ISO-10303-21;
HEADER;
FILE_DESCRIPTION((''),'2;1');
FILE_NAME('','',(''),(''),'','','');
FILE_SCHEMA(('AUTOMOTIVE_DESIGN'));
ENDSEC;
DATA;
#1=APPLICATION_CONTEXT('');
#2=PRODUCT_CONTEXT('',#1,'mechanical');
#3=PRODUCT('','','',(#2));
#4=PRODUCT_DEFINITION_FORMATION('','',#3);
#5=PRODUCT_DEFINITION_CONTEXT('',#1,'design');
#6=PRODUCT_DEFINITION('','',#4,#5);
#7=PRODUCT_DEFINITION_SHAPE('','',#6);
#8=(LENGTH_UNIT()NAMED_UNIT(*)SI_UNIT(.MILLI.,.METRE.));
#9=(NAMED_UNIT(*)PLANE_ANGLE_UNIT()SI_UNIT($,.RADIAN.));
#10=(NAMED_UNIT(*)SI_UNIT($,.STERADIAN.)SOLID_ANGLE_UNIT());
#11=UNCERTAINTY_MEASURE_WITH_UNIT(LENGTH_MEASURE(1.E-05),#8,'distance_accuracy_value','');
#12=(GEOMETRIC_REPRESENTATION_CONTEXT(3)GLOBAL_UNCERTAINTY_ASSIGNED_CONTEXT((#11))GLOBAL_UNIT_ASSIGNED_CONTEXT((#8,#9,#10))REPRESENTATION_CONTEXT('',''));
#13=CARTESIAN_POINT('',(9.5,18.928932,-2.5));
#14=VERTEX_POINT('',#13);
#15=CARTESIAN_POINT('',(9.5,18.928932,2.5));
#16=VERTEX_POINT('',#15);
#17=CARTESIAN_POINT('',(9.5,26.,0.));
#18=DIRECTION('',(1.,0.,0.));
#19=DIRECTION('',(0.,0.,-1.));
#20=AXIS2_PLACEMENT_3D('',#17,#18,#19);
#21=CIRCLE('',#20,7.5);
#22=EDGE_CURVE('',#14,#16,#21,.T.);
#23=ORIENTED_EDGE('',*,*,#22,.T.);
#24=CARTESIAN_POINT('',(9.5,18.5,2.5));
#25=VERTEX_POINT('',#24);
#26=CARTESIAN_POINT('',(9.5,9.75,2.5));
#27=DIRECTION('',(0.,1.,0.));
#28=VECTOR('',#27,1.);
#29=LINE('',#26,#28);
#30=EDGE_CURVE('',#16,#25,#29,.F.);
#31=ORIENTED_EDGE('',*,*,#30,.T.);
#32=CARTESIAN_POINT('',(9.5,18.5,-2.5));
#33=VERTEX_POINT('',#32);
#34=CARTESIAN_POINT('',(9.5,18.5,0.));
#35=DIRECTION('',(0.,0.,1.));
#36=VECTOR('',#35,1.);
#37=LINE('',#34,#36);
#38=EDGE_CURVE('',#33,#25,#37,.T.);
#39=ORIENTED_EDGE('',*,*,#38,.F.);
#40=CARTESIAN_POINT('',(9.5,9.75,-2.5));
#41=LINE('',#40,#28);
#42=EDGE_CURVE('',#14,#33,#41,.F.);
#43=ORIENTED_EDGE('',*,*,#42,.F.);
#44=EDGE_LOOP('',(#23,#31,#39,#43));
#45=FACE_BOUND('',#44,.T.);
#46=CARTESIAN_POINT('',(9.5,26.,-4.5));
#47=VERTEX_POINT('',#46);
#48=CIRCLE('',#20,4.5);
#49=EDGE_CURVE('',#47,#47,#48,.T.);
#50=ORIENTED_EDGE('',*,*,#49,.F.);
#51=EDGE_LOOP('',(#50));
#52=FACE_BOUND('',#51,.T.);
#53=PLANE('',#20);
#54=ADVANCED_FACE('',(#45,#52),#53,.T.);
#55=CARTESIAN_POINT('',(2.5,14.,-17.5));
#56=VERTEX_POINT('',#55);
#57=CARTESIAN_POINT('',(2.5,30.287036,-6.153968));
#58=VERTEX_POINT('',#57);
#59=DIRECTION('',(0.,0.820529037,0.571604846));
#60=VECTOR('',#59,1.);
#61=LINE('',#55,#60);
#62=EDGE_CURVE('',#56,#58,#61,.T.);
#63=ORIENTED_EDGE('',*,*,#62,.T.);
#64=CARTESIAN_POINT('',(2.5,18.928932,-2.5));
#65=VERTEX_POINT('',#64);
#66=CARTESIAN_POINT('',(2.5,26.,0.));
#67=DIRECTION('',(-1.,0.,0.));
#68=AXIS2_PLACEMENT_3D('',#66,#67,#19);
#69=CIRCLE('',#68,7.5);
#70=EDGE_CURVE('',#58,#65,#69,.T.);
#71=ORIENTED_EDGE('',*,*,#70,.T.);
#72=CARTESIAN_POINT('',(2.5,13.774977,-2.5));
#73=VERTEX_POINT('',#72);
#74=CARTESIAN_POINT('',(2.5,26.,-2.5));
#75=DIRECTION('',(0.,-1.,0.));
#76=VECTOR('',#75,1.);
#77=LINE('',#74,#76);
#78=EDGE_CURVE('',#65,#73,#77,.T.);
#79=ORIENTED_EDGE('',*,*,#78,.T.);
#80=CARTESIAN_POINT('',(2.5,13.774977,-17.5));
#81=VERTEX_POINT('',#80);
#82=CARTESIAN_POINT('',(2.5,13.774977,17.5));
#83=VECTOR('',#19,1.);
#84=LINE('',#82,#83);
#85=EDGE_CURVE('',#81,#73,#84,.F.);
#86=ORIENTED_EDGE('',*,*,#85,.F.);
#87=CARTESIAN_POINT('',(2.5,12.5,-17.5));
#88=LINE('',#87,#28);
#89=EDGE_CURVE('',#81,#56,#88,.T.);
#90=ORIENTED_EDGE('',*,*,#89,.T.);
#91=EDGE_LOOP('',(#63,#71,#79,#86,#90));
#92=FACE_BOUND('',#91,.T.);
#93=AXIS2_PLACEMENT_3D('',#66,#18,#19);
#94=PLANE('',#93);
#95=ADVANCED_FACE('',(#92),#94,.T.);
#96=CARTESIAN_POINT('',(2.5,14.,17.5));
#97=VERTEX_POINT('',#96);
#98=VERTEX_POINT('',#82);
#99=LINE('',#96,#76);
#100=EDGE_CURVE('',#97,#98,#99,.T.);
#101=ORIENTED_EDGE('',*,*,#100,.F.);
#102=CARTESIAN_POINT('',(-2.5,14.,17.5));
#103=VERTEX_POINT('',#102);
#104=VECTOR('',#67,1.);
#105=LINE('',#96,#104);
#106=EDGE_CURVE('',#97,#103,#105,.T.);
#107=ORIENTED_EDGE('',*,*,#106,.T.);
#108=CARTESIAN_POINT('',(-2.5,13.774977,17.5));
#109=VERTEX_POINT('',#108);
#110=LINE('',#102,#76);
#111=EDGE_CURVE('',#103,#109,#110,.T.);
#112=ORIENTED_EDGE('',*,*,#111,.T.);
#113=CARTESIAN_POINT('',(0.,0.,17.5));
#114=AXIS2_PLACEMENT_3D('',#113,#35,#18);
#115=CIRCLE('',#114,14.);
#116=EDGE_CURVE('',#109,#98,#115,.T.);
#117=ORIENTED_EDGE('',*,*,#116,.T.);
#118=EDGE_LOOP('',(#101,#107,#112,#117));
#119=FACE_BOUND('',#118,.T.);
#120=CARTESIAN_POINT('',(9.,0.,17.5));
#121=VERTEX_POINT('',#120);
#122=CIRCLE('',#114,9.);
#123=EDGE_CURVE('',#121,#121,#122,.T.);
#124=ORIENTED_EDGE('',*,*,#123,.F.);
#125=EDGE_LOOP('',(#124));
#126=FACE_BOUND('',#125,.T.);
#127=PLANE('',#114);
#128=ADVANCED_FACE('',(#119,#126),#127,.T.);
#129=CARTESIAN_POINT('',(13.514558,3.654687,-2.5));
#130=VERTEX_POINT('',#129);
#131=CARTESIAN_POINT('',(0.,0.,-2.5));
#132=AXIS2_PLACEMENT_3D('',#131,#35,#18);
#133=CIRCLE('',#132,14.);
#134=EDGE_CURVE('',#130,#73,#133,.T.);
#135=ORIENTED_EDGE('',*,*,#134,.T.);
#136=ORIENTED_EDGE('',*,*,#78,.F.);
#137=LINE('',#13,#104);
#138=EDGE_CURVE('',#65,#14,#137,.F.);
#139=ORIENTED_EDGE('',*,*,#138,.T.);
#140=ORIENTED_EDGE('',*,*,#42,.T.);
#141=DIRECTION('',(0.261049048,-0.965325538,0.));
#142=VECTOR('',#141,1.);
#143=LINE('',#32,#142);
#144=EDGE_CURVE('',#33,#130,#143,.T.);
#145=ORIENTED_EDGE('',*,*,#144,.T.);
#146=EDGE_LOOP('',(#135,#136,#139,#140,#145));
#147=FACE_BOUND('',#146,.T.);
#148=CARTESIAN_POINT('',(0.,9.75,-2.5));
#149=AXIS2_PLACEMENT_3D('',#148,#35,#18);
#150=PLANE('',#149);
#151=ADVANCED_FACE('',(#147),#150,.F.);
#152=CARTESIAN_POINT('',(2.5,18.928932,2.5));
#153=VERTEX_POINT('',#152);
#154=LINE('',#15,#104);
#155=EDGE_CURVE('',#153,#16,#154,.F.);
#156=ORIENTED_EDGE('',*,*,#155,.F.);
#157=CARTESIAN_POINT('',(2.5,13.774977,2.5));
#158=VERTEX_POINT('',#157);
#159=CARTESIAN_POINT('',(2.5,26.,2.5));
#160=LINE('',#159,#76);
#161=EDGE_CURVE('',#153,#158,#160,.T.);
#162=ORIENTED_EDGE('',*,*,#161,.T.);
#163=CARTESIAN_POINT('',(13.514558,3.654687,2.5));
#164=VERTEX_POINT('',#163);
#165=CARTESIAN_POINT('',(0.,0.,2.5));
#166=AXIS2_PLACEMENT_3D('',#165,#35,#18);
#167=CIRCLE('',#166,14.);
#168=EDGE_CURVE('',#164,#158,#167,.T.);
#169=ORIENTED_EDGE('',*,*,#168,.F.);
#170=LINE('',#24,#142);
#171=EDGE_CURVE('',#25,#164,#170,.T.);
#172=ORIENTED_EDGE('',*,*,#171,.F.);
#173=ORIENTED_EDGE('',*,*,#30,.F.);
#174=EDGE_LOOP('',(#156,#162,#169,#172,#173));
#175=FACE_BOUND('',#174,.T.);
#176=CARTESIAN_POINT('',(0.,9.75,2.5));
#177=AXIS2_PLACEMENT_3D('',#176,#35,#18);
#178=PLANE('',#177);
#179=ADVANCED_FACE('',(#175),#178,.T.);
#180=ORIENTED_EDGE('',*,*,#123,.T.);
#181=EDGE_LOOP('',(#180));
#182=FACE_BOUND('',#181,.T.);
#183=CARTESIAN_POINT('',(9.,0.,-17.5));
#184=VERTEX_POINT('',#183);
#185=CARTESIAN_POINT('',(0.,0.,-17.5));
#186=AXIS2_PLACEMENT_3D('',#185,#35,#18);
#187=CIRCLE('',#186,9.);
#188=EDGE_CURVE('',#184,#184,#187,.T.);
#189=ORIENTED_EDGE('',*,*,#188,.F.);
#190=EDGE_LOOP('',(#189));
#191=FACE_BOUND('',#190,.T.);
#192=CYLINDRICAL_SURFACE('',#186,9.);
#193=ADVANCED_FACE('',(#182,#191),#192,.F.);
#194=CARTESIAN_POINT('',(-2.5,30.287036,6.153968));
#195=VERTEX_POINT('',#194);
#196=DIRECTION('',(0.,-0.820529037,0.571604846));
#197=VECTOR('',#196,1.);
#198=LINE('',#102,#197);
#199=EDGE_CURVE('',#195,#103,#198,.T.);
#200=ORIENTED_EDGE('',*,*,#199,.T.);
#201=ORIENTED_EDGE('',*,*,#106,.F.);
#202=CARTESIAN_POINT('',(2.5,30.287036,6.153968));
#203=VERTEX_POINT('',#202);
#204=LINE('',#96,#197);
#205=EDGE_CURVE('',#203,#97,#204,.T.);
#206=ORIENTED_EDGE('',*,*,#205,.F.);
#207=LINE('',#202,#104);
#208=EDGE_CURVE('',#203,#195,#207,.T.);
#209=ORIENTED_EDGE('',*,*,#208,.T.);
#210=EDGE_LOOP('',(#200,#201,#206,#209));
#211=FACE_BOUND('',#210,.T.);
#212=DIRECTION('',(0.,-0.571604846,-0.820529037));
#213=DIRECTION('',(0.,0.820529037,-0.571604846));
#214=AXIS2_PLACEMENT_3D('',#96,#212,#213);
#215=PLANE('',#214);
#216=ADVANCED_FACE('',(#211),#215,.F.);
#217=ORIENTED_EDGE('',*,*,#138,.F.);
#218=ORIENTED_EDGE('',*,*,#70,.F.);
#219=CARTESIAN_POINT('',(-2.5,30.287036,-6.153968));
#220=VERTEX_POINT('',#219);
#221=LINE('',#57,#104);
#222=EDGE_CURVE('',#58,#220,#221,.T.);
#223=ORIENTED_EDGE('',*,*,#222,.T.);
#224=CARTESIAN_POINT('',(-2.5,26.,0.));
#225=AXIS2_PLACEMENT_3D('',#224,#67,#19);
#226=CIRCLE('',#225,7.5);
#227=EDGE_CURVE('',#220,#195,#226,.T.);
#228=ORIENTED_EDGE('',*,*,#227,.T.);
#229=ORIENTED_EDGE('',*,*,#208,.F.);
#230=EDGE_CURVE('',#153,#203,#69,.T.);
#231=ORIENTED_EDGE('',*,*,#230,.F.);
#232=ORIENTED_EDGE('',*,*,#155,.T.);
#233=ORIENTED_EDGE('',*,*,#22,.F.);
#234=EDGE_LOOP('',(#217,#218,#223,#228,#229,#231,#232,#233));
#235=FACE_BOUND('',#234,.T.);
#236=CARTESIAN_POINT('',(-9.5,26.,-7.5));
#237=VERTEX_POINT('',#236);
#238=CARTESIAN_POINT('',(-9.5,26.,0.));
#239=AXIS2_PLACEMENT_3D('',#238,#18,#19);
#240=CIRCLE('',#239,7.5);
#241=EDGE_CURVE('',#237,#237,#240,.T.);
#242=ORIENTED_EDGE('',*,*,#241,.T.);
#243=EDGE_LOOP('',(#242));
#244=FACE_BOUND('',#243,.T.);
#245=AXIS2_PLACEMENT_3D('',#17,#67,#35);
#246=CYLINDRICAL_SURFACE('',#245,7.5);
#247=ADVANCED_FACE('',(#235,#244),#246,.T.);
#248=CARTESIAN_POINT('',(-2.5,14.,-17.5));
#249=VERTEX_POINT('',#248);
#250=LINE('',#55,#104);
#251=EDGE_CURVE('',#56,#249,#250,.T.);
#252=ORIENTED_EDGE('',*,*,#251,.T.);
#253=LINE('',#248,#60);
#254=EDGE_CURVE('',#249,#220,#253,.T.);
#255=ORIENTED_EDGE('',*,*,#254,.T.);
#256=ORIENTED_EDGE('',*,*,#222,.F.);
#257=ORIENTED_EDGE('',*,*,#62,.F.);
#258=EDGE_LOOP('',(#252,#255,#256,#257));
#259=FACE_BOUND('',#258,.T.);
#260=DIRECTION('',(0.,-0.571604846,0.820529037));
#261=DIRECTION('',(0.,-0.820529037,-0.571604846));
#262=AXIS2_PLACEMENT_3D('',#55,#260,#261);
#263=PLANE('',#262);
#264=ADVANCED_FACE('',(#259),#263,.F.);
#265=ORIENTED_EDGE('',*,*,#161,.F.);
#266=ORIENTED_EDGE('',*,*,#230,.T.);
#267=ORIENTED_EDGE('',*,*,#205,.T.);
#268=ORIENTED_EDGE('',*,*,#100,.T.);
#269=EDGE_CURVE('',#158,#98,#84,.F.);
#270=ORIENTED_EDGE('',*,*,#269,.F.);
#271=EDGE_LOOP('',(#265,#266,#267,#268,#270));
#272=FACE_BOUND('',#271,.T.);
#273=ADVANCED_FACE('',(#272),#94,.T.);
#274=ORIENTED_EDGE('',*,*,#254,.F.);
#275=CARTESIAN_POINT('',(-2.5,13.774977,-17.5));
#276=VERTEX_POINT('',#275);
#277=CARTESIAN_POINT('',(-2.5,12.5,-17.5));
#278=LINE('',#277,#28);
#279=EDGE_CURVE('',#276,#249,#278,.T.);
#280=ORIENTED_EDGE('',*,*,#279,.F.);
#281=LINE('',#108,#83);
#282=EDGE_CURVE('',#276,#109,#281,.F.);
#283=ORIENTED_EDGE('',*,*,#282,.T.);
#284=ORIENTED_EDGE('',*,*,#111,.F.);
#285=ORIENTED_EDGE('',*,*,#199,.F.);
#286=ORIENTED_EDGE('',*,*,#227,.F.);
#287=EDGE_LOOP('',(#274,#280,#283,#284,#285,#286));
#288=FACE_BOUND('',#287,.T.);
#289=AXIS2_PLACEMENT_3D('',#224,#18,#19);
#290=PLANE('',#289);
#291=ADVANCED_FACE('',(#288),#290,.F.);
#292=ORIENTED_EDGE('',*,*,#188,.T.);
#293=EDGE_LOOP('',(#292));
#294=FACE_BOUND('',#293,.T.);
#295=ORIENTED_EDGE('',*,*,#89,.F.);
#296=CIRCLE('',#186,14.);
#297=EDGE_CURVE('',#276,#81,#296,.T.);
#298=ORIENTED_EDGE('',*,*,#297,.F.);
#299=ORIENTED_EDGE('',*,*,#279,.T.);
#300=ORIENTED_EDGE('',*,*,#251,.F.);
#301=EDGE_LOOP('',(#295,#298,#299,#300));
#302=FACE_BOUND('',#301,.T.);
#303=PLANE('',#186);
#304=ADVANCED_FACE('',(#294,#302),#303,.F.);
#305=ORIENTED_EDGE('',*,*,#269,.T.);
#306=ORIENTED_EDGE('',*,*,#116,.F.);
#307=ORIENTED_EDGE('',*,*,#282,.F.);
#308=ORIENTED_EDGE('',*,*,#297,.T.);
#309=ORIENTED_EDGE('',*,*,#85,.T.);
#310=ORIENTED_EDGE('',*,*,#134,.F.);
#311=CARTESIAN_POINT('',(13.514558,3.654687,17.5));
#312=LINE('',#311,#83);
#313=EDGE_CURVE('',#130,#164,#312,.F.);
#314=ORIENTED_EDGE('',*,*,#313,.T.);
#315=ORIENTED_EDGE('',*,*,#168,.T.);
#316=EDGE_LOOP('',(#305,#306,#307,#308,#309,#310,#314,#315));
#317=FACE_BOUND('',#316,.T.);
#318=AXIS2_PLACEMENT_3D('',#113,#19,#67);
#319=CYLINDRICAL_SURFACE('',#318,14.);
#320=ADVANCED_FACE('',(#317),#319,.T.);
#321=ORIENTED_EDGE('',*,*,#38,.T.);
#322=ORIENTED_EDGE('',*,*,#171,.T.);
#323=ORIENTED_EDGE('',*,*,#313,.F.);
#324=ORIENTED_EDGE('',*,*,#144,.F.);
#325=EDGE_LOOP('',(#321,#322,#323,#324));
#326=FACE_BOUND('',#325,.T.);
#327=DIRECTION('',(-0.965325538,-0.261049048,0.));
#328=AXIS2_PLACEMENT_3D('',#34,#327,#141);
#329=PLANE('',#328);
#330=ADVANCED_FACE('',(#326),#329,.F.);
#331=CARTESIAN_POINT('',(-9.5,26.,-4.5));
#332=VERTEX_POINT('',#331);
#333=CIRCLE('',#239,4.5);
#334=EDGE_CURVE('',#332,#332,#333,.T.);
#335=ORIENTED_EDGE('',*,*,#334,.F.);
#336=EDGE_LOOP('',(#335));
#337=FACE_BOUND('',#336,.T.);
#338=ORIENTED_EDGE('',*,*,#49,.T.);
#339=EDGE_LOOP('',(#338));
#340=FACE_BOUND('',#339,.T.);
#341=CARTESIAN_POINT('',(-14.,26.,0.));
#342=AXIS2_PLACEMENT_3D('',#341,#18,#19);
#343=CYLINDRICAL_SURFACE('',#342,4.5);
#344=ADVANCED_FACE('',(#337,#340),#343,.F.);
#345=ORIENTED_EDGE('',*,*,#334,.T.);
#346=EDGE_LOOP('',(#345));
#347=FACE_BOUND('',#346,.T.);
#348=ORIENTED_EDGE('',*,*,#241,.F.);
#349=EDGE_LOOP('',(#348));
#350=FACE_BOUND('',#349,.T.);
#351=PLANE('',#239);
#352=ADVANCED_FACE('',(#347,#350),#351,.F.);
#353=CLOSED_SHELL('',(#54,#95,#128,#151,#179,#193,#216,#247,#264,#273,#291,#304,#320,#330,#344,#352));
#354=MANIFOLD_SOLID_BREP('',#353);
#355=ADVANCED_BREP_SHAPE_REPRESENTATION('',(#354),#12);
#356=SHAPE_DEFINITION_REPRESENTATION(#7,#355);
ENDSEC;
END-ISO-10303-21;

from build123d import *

# Parameters (mm, degrees)
SKETCH1_R               = 14
BOSS_EXTRUDE1_DEPTH     = 17.5
CUT_EXTRUDE1_DEPTH      = 27.424420523
CUT_EXTRUDE1_DEPTH_BACK = 27.424420523
SKETCH2_R               = 9
SKETCH3_R               = 7.5
BOSS_EXTRUDE2_DEPTH     = 9.5
CUT_EXTRUDE2_DEPTH      = 45.505617623
CUT_EXTRUDE2_DEPTH_BACK = 45.505617623
SKETCH4_R               = 4.5
BOSS_EXTRUDE3_DEPTH     = 2.5
RIB3_START              = -2.5
RIB3_DEPTH              = 5


with BuildPart() as part:
    # Sketch1 → Boss-Extrude1 (new, symmetric)
    with BuildSketch(Plane.XY):
        Circle(SKETCH1_R)
    extrude(amount=BOSS_EXTRUDE1_DEPTH, both=True)

    # Sketch2 → Cut-Extrude1 (cut, two sides: drawn at the far end of the back side and taken through both)
    with BuildSketch(Plane.XY.offset(-CUT_EXTRUDE1_DEPTH_BACK)):
        Circle(SKETCH2_R)
    extrude(amount=CUT_EXTRUDE1_DEPTH + CUT_EXTRUDE1_DEPTH_BACK, mode=Mode.SUBTRACT)



with BuildPart() as body_2:
    # Sketch3 → Boss-Extrude2 (new, symmetric)
    with BuildSketch(Plane(origin=(0, 0, 0), x_dir=(0, 0, -1), z_dir=(1, 0, 0))):
        with Locations((0, 26)):
            Circle(SKETCH3_R)
    extrude(amount=BOSS_EXTRUDE2_DEPTH, both=True)

    # Sketch4 → Cut-Extrude2 (cut, two sides: drawn at the far end of the back side and taken through both)
    with BuildSketch(Plane(origin=(9.5, 0, 0), x_dir=(0, 0, -1), z_dir=(1, 0, 0)).offset(-CUT_EXTRUDE2_DEPTH_BACK)):
        with Locations((0, 26)):
            Circle(SKETCH4_R)
    extrude(amount=CUT_EXTRUDE2_DEPTH + CUT_EXTRUDE2_DEPTH_BACK, mode=Mode.SUBTRACT)


with BuildPart() as part_1:
    add(part.part)

    add(body_2.part)  # Boss-Extrude3 merges body 2
    # Sketch5 → Boss-Extrude3 (add, symmetric)
    with BuildSketch(Plane(origin=(0, 0, 0), x_dir=(0, 0, -1), z_dir=(1, 0, 0))):
        with BuildLine():
            Line((-17.5, 14), (-6.153967777, 30.287036342))
            ThreePointArc((-6.153967777, 30.287036342), (-7.414340436, 27.130290186), (-7.151829247, 23.741385731))
            ThreePointArc((-7.151829247, 23.741385731), (-4.43341815, 19.950636107), (0, 18.5))
            ThreePointArc((0, 18.5), (4.056082014, 19.691418646), (6.823499563, 22.887147015))
            ThreePointArc((6.823499563, 22.887147015), (7.328923752, 24.407242442), (7.5, 26))
            ThreePointArc((7.5, 26), (7.155583775, 28.246691086), (6.153967777, 30.287036342))
            Line((6.153967777, 30.287036342), (17.5, 14))
            Line((17.5, 14), (17.5, 12.5))
            Line((17.5, 12.5), (-17.5, 12.5))
            Line((-17.5, 12.5), (-17.5, 14))
        make_face()
    extrude(amount=BOSS_EXTRUDE3_DEPTH, both=True)

    # Rib3: read off the stored shape, not the designer's step
    # Rib3 outline → Rib3 (add)
    with BuildSketch(Plane.XY.offset(RIB3_START)):
        with BuildLine():
            Line((9.5, 18.928932188), (2.5, 18.928932188))
            Line((2.5, 18.928932188), (2.5, 13.774977314))
            ThreePointArc((2.5, 13.774977314), (9.472147799, 10.309142354), (13.514557534, 3.654686672))
            Line((13.514557534, 3.654686672), (9.5, 18.5))
            Line((9.5, 18.5), (9.5, 18.928932188))
        make_face()
    extrude(amount=RIB3_DEPTH)


solid = part_1.part
